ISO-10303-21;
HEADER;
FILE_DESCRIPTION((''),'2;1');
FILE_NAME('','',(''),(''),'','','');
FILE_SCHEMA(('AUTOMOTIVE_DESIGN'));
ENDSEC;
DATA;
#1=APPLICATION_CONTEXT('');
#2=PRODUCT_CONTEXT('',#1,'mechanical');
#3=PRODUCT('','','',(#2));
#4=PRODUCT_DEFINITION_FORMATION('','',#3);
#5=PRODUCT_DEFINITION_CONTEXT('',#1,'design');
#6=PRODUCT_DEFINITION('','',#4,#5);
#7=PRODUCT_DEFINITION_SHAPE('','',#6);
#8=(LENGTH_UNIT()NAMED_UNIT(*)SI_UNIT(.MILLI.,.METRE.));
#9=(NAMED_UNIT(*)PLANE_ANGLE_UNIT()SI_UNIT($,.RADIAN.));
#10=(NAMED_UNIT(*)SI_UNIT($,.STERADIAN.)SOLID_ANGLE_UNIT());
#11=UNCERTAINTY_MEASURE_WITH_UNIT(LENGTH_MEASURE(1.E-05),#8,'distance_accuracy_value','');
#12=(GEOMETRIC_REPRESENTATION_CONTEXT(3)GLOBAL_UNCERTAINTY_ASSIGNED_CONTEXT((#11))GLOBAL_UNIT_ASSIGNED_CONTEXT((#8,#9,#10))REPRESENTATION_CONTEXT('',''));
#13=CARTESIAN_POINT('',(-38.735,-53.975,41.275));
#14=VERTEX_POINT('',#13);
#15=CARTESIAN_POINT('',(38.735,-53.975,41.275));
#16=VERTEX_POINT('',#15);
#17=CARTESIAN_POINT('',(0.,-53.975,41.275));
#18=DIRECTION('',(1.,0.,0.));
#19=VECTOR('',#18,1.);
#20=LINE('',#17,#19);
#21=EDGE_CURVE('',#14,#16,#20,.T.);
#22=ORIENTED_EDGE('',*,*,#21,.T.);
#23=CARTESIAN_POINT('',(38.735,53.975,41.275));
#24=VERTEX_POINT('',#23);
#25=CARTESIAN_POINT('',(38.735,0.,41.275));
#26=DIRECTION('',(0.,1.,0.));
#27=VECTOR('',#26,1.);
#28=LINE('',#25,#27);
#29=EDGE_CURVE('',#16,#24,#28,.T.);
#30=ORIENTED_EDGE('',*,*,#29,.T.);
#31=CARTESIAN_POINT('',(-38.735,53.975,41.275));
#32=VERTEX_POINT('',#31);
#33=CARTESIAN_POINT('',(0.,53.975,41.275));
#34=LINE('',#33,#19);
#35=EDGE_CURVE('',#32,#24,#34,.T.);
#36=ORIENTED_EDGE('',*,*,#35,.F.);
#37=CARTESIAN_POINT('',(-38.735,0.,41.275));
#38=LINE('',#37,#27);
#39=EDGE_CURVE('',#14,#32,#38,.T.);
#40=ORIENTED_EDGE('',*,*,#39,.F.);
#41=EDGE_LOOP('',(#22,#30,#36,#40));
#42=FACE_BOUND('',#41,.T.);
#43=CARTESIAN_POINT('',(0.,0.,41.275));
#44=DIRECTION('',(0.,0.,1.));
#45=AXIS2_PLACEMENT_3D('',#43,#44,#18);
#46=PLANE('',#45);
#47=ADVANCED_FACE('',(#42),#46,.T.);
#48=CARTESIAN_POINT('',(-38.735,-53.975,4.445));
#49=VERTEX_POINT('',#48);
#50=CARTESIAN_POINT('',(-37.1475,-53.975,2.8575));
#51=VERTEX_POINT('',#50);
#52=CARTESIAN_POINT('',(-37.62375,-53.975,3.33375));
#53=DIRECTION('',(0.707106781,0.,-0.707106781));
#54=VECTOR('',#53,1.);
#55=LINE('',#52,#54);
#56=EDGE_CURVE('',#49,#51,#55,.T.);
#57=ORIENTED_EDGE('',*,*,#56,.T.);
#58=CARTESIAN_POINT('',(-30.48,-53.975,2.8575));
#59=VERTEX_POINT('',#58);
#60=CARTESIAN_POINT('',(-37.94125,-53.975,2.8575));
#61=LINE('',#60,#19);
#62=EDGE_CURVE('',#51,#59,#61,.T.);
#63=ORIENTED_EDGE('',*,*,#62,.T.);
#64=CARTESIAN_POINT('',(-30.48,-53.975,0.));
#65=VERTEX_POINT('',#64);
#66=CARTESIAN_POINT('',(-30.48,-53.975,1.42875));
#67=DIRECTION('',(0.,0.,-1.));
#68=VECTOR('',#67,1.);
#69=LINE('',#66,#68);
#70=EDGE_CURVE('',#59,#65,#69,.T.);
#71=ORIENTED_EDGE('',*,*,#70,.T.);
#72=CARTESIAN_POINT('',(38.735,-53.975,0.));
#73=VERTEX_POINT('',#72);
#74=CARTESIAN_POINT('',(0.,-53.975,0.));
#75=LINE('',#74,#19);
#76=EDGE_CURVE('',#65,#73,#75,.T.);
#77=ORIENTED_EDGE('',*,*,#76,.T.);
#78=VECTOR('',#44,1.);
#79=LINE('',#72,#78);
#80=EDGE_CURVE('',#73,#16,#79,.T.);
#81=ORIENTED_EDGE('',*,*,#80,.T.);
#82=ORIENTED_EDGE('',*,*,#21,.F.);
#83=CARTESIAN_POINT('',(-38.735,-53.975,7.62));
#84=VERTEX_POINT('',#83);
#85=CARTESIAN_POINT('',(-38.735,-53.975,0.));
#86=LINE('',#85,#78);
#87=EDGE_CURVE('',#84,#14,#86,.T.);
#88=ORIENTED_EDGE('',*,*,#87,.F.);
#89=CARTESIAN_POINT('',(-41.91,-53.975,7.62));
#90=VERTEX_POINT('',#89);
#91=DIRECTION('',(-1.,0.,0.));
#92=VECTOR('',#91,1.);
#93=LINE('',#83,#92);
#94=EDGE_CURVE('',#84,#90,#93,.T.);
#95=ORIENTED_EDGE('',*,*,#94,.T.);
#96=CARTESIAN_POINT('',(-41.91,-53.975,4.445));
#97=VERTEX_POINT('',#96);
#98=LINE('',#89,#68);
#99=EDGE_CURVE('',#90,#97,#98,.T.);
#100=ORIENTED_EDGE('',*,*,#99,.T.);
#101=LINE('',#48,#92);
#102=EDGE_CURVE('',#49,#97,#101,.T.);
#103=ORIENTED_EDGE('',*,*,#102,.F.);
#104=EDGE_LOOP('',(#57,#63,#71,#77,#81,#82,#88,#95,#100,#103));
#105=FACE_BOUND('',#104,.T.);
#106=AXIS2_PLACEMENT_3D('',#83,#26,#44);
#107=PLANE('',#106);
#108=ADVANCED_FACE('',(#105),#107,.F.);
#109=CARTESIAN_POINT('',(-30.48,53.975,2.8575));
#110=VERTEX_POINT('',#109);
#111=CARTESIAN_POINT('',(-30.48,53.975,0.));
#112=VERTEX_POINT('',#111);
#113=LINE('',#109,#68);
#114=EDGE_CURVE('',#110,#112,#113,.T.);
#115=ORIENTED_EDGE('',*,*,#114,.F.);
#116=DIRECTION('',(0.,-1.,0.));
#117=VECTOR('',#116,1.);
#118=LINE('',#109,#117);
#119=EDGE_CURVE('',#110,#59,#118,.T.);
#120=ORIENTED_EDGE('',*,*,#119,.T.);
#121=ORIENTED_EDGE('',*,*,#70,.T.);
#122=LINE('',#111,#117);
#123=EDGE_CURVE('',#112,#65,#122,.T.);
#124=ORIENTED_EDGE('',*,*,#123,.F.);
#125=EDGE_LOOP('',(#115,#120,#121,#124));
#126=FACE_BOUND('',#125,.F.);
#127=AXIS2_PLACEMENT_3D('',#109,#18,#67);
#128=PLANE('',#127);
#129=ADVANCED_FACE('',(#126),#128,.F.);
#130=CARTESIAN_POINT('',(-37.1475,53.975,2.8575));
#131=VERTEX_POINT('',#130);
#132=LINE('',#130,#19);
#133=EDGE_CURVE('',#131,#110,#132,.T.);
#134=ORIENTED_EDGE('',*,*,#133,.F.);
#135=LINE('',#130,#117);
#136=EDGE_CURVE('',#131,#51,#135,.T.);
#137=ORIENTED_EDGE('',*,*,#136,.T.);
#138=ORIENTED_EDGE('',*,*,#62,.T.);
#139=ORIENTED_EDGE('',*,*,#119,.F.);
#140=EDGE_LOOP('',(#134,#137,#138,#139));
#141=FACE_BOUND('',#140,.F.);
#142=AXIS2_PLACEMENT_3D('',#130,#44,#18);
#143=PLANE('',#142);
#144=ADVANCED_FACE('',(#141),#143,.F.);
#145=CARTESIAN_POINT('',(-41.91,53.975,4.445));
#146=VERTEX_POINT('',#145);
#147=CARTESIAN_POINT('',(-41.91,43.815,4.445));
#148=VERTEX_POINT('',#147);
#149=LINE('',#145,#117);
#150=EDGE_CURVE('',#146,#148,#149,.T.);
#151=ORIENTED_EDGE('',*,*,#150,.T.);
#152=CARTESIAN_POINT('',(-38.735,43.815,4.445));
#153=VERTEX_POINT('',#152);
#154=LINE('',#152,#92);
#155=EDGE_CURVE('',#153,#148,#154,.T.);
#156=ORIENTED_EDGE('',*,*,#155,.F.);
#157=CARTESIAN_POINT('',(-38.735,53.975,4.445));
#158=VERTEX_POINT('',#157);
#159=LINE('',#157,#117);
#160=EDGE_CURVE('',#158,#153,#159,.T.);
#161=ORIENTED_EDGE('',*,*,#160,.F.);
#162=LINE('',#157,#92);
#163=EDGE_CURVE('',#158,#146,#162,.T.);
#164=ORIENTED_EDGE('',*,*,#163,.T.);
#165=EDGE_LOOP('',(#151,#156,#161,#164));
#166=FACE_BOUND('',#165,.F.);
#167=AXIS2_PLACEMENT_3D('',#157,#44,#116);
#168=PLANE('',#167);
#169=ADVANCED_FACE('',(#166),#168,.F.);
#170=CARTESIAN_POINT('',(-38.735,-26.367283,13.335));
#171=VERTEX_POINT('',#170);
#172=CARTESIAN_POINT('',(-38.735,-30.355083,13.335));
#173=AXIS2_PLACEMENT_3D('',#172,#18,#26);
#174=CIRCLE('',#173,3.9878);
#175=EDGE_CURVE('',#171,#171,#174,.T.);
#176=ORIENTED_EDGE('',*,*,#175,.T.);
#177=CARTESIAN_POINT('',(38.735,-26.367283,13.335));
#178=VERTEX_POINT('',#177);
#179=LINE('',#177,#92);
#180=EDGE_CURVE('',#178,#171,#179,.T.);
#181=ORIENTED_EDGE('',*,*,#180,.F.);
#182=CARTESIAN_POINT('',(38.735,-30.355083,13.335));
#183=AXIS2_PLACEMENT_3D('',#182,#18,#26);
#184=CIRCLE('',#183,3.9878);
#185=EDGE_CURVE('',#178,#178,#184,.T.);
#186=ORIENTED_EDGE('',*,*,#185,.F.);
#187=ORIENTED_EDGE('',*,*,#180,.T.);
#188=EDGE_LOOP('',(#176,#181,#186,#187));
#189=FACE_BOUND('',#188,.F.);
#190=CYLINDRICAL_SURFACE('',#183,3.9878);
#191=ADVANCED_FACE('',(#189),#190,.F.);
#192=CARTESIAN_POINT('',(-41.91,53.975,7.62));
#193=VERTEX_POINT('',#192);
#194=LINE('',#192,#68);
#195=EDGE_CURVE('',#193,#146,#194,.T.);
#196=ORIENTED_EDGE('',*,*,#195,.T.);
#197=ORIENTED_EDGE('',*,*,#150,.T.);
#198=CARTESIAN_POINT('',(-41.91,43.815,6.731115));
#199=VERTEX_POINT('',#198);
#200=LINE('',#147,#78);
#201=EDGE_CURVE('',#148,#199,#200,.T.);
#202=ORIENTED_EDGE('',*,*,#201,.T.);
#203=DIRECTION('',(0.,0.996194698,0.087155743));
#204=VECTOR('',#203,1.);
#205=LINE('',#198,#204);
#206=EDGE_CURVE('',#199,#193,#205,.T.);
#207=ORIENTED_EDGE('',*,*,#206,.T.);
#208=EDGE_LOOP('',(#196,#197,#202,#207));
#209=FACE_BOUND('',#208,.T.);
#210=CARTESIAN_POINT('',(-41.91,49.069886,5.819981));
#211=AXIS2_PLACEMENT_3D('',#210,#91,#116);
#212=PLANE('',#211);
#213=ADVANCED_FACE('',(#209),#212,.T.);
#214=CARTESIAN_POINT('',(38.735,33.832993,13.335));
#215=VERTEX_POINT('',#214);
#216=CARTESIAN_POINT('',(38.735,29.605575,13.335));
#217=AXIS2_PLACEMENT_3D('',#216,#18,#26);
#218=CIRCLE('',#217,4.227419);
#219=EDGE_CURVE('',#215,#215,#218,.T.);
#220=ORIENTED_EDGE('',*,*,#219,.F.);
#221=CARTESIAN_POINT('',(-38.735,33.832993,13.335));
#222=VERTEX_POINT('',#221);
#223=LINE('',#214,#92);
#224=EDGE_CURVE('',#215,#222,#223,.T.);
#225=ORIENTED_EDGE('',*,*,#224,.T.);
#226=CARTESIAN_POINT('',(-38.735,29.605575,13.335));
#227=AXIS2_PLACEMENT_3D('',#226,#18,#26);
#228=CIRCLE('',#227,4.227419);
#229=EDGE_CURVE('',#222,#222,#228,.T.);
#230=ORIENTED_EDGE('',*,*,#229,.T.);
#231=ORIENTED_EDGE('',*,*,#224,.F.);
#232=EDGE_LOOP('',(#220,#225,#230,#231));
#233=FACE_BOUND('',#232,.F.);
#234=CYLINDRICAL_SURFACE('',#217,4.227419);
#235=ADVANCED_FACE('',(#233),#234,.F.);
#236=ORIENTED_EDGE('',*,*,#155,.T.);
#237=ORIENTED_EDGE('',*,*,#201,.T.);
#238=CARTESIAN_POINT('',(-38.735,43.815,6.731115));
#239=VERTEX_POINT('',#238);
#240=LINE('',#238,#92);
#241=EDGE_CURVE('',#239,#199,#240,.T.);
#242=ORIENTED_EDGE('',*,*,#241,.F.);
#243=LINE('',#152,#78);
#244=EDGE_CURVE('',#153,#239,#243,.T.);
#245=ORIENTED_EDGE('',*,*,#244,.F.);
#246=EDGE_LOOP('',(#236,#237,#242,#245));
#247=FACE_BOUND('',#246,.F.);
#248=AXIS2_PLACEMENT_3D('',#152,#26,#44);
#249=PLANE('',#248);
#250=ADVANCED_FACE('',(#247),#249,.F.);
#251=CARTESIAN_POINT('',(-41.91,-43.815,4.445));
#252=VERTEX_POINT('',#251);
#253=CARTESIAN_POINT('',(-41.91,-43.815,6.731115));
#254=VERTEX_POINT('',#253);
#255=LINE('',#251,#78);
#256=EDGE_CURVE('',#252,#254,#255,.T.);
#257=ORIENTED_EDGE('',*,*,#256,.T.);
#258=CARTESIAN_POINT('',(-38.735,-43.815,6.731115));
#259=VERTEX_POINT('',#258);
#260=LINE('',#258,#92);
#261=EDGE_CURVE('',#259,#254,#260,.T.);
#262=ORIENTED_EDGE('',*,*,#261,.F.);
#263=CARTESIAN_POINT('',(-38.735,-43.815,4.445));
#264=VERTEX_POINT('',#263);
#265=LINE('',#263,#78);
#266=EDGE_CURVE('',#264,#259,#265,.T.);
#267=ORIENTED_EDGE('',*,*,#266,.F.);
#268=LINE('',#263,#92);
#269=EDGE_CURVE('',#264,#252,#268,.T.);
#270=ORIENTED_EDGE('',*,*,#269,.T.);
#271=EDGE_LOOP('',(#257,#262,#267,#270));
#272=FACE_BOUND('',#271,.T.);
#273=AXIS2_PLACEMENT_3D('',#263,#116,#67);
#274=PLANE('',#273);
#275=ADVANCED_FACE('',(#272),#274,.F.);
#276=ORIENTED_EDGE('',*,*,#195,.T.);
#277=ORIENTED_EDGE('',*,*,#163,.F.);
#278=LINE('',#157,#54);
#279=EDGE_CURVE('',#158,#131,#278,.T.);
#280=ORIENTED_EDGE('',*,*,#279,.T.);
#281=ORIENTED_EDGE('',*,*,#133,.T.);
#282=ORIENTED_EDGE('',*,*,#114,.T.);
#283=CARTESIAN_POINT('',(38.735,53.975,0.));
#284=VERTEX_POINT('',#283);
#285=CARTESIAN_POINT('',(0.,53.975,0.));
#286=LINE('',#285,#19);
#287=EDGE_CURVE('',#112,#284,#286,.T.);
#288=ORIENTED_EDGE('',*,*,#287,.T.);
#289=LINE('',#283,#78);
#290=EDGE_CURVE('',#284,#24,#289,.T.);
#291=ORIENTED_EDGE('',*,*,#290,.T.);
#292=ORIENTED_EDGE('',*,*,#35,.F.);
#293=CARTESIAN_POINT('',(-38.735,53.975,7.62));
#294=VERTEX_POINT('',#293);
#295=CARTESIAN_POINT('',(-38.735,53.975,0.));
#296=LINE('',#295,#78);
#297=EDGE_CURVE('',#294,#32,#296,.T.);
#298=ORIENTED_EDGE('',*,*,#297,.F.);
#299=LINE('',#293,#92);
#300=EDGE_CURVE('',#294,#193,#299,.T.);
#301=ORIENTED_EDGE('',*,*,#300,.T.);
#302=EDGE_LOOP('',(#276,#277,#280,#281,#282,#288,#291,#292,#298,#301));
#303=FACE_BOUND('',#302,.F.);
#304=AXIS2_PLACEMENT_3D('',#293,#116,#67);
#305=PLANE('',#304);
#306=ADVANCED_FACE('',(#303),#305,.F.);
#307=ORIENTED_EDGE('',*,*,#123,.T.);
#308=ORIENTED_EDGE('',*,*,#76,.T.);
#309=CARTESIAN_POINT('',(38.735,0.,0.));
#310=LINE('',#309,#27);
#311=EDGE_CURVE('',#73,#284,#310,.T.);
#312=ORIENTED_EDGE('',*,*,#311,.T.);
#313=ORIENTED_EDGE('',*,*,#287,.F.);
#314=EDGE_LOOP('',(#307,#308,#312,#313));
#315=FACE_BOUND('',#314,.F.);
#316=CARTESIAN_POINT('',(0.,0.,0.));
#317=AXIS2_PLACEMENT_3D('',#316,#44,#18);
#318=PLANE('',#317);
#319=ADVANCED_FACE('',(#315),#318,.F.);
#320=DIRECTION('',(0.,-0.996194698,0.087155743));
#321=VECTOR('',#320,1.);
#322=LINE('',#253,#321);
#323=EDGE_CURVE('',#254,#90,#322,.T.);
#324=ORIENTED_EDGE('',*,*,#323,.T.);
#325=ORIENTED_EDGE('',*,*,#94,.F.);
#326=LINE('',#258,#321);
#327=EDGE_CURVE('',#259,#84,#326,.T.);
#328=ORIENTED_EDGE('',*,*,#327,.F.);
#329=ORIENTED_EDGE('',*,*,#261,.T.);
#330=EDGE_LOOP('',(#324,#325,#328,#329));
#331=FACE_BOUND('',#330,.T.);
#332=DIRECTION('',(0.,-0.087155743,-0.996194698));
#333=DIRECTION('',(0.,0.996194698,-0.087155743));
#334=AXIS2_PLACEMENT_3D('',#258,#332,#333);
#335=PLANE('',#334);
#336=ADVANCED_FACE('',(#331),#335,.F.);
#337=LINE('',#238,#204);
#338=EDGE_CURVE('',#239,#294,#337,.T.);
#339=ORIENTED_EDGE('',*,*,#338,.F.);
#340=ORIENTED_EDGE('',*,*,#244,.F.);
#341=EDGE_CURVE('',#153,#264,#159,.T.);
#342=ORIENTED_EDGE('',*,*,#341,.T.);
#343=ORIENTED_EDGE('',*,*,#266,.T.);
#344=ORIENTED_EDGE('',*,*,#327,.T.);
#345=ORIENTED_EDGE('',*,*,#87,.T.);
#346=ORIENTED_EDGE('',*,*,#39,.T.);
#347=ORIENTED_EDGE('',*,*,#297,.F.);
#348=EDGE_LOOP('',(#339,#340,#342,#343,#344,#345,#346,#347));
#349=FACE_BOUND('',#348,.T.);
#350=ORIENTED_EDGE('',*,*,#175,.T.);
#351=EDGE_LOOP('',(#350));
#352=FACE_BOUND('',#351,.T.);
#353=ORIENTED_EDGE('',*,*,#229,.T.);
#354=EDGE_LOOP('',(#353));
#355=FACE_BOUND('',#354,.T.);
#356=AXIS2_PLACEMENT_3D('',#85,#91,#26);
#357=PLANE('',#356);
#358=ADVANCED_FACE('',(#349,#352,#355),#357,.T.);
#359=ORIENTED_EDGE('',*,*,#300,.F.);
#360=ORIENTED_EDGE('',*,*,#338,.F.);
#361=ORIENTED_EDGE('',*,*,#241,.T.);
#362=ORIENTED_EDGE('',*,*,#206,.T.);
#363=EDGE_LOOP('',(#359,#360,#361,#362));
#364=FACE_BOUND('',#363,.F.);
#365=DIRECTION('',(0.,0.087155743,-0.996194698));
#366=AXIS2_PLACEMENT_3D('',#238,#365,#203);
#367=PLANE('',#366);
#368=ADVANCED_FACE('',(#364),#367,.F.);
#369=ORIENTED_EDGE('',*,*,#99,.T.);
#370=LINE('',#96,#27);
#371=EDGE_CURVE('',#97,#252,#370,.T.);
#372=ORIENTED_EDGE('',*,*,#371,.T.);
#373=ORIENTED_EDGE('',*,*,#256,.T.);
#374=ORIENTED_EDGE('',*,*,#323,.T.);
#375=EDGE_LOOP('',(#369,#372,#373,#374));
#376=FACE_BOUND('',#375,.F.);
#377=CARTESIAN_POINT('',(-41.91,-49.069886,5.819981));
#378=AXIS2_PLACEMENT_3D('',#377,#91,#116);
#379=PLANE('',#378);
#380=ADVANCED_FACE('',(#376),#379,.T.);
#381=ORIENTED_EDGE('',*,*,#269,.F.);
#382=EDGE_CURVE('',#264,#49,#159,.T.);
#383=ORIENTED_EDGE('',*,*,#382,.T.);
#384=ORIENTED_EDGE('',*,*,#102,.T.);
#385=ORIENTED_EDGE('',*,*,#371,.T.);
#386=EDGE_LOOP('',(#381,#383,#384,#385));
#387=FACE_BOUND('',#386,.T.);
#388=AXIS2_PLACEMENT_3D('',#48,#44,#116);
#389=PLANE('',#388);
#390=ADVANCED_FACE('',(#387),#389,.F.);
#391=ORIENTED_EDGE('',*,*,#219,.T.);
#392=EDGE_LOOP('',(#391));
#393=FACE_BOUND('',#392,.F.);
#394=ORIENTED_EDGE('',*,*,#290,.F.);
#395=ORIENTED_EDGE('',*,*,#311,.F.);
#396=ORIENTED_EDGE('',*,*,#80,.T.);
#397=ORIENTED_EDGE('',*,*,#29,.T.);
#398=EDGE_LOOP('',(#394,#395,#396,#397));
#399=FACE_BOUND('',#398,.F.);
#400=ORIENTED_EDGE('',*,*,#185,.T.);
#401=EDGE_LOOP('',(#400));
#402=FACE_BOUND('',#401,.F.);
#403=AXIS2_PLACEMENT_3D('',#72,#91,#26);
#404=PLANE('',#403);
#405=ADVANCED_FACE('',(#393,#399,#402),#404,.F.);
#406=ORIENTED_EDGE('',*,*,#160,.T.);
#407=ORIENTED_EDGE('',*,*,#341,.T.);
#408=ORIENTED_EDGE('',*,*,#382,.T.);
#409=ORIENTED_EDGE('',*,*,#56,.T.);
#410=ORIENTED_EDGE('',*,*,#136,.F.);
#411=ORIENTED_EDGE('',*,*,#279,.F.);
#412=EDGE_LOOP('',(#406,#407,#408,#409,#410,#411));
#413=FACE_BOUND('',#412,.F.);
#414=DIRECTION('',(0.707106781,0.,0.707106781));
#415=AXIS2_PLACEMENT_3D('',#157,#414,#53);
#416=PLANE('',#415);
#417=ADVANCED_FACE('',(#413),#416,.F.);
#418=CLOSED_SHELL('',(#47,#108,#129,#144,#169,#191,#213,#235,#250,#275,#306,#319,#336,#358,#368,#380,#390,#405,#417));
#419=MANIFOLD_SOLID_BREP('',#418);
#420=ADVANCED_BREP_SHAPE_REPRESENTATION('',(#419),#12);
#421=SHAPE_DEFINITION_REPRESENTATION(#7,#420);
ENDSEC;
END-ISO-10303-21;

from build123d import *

# Parameters (mm, degrees)
F0_W     = 77.47
F0_H     = 107.95
F1_DEPTH = 41.275
F2_R     = 3.9878
F2_R_2   = 4.2274185689
F3_DEPTH = 77.471
F5_DEPTH = 107.951
F7_DEPTH = 3.175


# Not quite as in the source:
# - a pattern or mirror of a feature is missing from the dataset's text; its kind, count and spacing are read off the source's solid


with BuildPart() as f1:
    # F0 (on Top) → F1 (new body)
    with BuildSketch(Plane.XY):
        Rectangle(F0_W, F0_H)
    extrude(amount=F1_DEPTH)

    # F2 (on face) → F3 (cut, through all)
    with BuildSketch(Plane.YZ.offset(38.735)):
        with Locations((-30.3550828248, 13.335)):
            Circle(F2_R)
        with Locations((29.6055749059, 13.335)):
            Circle(F2_R_2)
    extrude(amount=-F3_DEPTH, mode=Mode.SUBTRACT)

    # F4 (on face) → F5 (cut, through all)
    with BuildSketch(Plane(origin=(0, 53.975, 0), x_dir=(-1, 0, 0), z_dir=(0, 1, 0))):
        Polygon((38.735, 0), (38.735, 4.445), (37.1475, 2.8575), (30.48, 2.8575), (30.48, 0), align=None)
    extrude(amount=-F5_DEPTH, mode=Mode.SUBTRACT)

    # F6 (on face) → F7 (join)
    with BuildSketch(Plane(origin=(-38.735, 0, 0), x_dir=(0, -1, 0), z_dir=(-1, 0, 0))):
        Polygon((-53.975, 7.62), (-53.975, 4.445), (-43.815, 4.445), (-43.815, 6.7311151786), align=None)
    f7 = extrude(amount=F7_DEPTH)

    # F7_copies: F7 across plane
    add(f7.mirror(Plane(origin=(0, 0, 0), x_dir=(0, 0, -1), z_dir=(0, -1, 0))))


solid = f1.part
